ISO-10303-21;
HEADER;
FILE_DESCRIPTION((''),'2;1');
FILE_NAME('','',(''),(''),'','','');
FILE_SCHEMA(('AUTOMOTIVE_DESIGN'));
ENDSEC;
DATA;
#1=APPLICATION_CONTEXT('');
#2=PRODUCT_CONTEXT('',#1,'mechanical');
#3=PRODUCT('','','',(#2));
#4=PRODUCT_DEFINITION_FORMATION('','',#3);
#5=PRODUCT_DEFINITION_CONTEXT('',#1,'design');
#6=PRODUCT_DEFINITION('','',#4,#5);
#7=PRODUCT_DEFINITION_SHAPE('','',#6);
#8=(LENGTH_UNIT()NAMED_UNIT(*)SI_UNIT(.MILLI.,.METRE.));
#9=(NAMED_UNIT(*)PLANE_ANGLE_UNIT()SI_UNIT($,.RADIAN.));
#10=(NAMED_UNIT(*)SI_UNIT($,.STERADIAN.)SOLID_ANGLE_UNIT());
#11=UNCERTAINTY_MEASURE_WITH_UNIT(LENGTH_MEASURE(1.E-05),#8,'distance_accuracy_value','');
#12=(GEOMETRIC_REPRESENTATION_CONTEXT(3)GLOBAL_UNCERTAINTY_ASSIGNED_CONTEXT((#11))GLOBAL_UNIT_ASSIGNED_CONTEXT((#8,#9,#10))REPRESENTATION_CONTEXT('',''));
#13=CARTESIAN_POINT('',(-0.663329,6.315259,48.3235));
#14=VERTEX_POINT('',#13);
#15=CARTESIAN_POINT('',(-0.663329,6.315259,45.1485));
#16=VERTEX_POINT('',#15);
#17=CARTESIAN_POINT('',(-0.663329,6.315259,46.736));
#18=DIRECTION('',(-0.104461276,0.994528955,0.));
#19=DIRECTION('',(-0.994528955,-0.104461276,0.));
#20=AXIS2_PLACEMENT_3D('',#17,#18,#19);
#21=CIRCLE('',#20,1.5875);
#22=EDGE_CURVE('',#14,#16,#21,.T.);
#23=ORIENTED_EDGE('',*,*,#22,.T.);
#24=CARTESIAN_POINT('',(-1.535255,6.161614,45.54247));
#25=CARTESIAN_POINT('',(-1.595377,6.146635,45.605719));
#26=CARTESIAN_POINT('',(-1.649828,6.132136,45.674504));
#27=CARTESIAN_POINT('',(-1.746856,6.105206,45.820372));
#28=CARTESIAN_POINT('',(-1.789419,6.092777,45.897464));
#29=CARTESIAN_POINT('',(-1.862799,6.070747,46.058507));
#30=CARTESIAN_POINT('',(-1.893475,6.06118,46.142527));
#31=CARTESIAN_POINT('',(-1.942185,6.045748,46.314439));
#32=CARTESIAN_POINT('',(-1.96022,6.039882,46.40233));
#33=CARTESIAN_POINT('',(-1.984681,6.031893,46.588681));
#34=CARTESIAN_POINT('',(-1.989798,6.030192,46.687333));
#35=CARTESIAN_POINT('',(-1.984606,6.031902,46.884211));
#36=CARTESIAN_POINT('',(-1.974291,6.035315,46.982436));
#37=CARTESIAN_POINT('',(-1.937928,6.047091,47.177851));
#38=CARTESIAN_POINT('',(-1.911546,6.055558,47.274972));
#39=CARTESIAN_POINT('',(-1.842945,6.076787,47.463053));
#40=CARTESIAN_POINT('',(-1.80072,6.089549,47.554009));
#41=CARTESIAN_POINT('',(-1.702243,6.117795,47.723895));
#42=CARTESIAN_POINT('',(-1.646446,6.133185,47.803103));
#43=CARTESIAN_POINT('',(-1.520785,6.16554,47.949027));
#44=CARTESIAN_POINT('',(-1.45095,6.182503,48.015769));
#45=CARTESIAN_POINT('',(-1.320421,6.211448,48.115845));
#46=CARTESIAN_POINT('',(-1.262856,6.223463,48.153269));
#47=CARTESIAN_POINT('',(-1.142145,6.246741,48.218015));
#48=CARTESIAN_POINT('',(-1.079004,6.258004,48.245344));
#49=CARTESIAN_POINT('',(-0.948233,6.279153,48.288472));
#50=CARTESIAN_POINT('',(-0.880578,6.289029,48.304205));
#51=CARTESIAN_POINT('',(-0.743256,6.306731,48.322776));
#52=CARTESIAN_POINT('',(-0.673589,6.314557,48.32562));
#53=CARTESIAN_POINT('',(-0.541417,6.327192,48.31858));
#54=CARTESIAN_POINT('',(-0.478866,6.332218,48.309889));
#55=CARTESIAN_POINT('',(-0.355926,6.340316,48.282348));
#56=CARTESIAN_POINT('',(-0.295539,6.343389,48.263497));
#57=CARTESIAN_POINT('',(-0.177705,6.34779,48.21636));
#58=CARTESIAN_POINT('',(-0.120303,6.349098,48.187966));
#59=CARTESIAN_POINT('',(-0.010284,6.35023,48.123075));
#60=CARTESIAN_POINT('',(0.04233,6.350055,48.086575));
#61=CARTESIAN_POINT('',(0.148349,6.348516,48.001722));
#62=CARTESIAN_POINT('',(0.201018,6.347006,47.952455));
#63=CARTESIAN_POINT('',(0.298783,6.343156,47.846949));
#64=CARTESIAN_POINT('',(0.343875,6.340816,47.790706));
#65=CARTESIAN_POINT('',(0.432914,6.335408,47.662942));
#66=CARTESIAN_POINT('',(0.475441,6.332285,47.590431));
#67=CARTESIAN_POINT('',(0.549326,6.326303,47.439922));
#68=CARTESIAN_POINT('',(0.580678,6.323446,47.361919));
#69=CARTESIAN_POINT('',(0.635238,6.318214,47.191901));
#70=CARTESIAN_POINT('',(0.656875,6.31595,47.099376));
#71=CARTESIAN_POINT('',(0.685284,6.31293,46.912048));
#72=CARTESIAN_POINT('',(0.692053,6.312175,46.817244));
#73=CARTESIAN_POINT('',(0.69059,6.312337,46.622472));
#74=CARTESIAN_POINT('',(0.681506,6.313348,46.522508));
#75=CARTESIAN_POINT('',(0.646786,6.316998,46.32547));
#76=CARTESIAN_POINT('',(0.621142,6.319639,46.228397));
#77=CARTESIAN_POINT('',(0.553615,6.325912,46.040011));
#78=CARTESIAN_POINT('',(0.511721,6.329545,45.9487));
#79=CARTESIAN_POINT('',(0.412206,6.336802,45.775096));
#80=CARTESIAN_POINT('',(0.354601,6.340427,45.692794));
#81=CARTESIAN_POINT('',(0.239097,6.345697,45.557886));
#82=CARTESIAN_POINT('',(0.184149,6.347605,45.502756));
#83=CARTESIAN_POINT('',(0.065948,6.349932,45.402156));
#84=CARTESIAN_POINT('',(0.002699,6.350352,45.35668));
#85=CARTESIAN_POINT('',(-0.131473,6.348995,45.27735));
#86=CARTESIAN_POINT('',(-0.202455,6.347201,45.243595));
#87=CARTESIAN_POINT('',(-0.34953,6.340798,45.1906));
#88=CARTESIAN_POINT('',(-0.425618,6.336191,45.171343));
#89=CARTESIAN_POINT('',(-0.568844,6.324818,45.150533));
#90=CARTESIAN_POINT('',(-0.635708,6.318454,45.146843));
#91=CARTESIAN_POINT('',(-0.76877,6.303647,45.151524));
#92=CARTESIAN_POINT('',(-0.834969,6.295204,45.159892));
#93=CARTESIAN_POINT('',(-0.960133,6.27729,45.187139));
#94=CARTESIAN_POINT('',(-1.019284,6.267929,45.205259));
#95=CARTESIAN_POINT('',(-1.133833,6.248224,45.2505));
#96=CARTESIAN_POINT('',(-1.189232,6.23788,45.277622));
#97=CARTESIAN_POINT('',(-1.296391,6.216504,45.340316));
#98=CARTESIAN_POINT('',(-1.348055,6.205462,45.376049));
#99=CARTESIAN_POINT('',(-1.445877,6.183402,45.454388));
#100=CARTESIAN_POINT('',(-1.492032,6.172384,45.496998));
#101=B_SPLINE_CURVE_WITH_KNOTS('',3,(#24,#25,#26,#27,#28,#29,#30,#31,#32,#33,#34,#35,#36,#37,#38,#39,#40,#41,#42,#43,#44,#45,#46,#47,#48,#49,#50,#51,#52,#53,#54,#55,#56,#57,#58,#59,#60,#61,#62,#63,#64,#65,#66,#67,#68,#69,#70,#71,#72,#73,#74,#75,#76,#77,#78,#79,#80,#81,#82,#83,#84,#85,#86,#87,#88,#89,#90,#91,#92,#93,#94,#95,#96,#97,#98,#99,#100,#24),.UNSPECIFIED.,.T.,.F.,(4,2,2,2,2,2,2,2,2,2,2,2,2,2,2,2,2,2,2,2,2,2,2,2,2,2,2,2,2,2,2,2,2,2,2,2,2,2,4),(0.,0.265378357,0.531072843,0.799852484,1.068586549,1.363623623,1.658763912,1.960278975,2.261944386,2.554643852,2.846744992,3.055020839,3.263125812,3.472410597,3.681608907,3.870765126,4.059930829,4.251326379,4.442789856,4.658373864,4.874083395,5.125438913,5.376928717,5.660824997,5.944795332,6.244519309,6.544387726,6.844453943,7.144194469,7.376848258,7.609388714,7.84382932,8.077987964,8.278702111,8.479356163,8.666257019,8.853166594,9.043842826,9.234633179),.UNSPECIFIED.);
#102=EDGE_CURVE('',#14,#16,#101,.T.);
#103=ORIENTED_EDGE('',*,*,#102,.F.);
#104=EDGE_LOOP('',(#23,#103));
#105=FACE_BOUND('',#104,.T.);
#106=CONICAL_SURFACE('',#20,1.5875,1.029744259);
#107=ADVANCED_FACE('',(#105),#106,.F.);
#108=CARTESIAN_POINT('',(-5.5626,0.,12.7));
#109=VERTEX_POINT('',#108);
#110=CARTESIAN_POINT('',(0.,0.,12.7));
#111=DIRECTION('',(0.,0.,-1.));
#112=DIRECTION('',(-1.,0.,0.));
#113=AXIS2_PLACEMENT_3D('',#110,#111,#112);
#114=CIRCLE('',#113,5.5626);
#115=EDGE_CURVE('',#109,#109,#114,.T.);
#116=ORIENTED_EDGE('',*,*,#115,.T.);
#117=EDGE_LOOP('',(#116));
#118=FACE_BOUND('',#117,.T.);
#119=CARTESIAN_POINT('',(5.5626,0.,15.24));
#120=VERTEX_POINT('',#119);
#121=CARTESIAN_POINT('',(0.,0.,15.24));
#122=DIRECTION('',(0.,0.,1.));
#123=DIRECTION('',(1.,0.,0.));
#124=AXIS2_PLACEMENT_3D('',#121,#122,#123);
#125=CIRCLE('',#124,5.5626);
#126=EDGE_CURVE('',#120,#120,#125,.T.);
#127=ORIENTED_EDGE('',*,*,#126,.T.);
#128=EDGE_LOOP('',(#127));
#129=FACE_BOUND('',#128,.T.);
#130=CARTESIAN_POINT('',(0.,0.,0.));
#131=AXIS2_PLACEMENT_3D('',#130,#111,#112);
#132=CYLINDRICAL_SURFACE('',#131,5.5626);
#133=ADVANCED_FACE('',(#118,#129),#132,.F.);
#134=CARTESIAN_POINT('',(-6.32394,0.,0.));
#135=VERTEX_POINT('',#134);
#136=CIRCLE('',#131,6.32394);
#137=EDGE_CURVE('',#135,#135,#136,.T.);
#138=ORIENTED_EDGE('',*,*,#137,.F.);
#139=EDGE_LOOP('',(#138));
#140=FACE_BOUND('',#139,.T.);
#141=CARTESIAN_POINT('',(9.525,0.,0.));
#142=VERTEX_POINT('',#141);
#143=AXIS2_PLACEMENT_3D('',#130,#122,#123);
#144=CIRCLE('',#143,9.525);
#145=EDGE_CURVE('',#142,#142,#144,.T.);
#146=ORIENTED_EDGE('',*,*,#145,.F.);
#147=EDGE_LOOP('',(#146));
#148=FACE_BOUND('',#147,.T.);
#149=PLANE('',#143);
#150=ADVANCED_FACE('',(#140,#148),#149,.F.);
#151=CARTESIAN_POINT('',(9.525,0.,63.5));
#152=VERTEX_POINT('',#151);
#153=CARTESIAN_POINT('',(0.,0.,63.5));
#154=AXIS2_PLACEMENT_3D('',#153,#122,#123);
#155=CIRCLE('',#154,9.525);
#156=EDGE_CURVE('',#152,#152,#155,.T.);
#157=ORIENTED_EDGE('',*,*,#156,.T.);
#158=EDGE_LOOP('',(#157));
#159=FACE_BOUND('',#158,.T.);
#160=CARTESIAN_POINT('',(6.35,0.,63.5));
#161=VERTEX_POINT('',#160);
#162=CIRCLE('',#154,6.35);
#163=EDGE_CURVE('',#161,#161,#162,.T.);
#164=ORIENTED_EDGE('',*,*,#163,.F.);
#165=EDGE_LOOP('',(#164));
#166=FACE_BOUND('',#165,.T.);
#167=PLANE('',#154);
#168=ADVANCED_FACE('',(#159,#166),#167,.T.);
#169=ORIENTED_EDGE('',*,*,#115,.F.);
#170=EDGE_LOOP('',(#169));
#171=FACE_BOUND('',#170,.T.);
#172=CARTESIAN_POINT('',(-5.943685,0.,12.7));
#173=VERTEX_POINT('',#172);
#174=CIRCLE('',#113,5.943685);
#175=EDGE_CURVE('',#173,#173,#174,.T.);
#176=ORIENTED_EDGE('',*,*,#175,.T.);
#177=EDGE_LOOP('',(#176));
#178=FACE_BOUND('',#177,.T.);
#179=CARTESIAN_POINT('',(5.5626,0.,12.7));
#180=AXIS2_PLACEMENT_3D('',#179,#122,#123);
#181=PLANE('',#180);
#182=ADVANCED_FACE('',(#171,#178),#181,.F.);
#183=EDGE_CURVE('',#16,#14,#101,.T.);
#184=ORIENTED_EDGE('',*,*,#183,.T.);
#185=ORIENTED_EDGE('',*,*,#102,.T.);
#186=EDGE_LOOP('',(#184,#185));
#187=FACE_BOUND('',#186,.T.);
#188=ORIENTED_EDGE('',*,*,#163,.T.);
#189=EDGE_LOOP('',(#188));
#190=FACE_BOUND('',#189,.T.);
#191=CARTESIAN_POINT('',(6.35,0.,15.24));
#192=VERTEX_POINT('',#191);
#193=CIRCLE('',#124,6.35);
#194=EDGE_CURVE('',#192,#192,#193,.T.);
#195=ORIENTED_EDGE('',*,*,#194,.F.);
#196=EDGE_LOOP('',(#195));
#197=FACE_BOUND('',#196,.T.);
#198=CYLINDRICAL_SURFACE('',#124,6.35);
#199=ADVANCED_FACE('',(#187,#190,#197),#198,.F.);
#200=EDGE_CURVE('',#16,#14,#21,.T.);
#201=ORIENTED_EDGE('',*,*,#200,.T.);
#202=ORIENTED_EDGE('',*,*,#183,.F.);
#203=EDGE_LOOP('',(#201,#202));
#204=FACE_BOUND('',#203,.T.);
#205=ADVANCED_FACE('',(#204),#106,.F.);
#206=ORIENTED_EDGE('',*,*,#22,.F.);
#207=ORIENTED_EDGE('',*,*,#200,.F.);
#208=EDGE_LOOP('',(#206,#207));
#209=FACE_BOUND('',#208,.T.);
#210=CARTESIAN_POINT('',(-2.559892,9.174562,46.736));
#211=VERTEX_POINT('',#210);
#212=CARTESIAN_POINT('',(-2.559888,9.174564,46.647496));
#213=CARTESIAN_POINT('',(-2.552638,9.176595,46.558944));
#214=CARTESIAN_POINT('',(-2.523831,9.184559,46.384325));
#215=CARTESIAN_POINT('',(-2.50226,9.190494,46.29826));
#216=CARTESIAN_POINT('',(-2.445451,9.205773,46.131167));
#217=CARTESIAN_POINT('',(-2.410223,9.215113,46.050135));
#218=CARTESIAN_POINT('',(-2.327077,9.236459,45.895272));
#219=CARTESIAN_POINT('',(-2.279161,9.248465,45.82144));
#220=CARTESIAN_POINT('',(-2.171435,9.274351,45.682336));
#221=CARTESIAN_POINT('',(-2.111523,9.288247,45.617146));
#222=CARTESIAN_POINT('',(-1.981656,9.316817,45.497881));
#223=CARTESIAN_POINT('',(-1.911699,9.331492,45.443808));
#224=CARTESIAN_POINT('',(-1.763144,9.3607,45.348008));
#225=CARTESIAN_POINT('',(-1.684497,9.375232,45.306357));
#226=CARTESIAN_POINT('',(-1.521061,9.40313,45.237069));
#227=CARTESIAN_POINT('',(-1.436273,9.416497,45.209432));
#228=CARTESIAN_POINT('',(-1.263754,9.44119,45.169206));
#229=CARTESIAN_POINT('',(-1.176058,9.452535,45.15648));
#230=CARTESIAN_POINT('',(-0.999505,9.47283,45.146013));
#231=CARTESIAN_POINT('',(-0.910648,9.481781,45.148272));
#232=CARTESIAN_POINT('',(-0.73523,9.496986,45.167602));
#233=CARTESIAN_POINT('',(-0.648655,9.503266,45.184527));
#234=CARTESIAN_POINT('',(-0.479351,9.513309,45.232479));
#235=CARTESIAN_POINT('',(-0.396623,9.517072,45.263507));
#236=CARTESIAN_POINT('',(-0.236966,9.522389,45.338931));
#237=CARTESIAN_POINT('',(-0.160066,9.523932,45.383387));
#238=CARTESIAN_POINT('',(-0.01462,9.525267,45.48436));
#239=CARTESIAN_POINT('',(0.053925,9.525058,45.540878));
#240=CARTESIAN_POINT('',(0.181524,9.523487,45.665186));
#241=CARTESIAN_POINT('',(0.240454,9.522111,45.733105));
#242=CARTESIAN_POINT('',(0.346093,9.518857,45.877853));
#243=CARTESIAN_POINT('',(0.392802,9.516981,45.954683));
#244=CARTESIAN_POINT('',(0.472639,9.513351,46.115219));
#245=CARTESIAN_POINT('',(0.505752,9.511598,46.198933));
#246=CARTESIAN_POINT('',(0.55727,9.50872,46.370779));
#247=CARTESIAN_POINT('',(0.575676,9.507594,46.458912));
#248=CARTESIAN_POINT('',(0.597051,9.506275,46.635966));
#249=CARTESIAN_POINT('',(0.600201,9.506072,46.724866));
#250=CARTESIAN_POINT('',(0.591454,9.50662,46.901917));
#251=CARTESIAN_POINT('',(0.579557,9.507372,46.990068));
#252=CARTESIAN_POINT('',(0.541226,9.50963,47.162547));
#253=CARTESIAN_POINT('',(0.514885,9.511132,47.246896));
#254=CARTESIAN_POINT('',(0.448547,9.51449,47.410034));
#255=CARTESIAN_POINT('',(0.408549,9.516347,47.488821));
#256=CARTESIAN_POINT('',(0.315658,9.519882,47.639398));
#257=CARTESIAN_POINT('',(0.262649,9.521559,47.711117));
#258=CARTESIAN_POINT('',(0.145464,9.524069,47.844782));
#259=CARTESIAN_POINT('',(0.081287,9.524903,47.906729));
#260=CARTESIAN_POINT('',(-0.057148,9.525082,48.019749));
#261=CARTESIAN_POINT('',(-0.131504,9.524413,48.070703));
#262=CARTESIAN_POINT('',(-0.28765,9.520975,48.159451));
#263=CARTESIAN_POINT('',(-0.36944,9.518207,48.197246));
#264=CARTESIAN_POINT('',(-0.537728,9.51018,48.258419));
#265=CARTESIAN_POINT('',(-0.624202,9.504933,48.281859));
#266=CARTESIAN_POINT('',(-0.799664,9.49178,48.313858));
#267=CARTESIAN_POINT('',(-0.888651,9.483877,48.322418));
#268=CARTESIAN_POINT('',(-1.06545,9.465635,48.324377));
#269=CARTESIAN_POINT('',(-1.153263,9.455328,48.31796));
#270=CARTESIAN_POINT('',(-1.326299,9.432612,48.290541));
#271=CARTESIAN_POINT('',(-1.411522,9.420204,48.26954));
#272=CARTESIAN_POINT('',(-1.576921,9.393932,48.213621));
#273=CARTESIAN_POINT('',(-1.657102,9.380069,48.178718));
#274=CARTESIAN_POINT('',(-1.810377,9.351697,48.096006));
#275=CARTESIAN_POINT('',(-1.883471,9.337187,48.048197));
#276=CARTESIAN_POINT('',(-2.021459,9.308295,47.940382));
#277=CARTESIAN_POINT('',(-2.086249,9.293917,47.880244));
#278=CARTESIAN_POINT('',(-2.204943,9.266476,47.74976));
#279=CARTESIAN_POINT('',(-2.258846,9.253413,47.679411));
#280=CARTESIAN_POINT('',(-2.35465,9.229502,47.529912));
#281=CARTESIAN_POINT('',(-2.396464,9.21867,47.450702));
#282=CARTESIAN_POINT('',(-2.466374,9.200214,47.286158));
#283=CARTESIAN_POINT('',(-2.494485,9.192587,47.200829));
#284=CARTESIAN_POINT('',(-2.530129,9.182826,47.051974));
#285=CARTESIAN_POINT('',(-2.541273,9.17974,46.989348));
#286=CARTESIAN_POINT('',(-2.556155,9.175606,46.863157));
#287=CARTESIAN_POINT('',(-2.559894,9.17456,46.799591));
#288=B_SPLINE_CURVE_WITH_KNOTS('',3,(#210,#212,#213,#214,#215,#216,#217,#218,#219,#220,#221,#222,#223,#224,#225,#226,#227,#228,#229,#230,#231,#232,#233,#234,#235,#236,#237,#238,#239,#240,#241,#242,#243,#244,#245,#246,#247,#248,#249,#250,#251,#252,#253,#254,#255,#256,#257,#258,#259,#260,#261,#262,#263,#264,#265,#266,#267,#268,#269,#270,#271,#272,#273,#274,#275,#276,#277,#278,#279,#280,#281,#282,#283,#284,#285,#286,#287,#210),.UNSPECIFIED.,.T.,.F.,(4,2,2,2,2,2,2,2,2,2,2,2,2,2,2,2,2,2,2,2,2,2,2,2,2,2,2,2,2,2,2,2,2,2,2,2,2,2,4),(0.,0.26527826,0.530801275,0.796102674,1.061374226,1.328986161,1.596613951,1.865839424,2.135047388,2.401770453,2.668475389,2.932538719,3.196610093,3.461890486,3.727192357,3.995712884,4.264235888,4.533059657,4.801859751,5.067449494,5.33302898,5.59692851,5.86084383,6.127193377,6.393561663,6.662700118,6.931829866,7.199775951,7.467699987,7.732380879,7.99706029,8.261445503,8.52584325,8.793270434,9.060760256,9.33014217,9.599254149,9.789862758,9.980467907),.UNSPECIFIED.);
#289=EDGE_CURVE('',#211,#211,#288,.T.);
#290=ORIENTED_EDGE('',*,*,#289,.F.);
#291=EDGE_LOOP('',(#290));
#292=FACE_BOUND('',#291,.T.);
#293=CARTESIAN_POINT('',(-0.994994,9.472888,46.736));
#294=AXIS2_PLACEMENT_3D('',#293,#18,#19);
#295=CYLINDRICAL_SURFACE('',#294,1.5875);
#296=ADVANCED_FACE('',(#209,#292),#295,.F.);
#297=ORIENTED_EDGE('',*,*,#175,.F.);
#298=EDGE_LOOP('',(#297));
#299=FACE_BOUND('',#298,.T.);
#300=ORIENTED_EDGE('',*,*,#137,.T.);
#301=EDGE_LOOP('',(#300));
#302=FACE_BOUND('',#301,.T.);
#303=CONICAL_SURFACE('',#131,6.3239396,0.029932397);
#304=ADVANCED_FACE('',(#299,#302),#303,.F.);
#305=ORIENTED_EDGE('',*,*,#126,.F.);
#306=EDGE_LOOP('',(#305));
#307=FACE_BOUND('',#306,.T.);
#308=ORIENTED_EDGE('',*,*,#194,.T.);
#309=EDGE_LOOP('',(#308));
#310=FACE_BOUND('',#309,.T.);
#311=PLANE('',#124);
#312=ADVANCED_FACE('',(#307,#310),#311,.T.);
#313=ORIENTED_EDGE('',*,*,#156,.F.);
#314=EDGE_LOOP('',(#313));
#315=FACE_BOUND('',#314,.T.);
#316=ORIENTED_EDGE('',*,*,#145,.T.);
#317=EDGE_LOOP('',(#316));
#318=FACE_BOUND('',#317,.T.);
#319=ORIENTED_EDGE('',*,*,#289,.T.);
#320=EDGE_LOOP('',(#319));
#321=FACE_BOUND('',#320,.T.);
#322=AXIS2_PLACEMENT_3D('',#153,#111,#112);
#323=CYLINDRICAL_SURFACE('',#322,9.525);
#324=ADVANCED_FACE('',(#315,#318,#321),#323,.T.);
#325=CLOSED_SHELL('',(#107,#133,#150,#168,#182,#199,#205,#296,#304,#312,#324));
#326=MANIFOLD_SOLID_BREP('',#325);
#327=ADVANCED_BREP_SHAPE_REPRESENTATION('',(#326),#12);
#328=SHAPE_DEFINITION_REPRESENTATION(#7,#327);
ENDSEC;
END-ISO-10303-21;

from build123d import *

# Parameters (mm, degrees)
SKETCH1_R           = 9.525
BOSS_EXTRUDE1_DEPTH = 63.5
SKETCH3_R           = 6.35
CUT_EXTRUDE2_DEPTH  = 48.26


# Read off the part's stored shape, not the designer's step: 1/8 (0.125) Diameter Hole1
with BuildPart() as part:
    # Sketch1 → Boss-Extrude1 (new body)
    with BuildSketch(Plane.XY):
        Circle(SKETCH1_R)
    extrude(amount=BOSS_EXTRUDE1_DEPTH)

    # Sketch3 → Cut-Extrude2 (cut)
    with BuildSketch(Plane.XY.offset(63.5)):
        Circle(SKETCH3_R)
    extrude(amount=-CUT_EXTRUDE2_DEPTH, mode=Mode.SUBTRACT)

    # 1/8 (0.125) Diameter Hole1 outline → 1/8 (0.125) Diameter Hole1 (revolve, cut)
    with BuildSketch(Plane(origin=(0, 0, 46.736), x_dir=(0.99452895474108, 0.10446127599074502, 0), z_dir=(0, 0, -1))):
        Polygon((1.5875, -9.525019471), (1.5875, -6.35), (1.346904209, -6.205435464), (0, -6.205435464), (0, -9.525019471), align=None)
    revolve(axis=Axis((0, 0, 46.736), (0.10446127599074502, -0.99452895474108, 0)), mode=Mode.SUBTRACT)

    # Sketch11 → 1/4 NPT Tapped Hole1 (revolve, cut)
    with BuildSketch(Plane.YZ):
        Polygon((0, 0), (0, 19.852347279), (5.5626, 16.51), (5.5626, 12.7), (5.943684593, 12.7), (6.3239396, 0), align=None)
    revolve(axis=Axis((0, 0, -6.35), (0, 0, 1)), mode=Mode.SUBTRACT)


solid = part.part
